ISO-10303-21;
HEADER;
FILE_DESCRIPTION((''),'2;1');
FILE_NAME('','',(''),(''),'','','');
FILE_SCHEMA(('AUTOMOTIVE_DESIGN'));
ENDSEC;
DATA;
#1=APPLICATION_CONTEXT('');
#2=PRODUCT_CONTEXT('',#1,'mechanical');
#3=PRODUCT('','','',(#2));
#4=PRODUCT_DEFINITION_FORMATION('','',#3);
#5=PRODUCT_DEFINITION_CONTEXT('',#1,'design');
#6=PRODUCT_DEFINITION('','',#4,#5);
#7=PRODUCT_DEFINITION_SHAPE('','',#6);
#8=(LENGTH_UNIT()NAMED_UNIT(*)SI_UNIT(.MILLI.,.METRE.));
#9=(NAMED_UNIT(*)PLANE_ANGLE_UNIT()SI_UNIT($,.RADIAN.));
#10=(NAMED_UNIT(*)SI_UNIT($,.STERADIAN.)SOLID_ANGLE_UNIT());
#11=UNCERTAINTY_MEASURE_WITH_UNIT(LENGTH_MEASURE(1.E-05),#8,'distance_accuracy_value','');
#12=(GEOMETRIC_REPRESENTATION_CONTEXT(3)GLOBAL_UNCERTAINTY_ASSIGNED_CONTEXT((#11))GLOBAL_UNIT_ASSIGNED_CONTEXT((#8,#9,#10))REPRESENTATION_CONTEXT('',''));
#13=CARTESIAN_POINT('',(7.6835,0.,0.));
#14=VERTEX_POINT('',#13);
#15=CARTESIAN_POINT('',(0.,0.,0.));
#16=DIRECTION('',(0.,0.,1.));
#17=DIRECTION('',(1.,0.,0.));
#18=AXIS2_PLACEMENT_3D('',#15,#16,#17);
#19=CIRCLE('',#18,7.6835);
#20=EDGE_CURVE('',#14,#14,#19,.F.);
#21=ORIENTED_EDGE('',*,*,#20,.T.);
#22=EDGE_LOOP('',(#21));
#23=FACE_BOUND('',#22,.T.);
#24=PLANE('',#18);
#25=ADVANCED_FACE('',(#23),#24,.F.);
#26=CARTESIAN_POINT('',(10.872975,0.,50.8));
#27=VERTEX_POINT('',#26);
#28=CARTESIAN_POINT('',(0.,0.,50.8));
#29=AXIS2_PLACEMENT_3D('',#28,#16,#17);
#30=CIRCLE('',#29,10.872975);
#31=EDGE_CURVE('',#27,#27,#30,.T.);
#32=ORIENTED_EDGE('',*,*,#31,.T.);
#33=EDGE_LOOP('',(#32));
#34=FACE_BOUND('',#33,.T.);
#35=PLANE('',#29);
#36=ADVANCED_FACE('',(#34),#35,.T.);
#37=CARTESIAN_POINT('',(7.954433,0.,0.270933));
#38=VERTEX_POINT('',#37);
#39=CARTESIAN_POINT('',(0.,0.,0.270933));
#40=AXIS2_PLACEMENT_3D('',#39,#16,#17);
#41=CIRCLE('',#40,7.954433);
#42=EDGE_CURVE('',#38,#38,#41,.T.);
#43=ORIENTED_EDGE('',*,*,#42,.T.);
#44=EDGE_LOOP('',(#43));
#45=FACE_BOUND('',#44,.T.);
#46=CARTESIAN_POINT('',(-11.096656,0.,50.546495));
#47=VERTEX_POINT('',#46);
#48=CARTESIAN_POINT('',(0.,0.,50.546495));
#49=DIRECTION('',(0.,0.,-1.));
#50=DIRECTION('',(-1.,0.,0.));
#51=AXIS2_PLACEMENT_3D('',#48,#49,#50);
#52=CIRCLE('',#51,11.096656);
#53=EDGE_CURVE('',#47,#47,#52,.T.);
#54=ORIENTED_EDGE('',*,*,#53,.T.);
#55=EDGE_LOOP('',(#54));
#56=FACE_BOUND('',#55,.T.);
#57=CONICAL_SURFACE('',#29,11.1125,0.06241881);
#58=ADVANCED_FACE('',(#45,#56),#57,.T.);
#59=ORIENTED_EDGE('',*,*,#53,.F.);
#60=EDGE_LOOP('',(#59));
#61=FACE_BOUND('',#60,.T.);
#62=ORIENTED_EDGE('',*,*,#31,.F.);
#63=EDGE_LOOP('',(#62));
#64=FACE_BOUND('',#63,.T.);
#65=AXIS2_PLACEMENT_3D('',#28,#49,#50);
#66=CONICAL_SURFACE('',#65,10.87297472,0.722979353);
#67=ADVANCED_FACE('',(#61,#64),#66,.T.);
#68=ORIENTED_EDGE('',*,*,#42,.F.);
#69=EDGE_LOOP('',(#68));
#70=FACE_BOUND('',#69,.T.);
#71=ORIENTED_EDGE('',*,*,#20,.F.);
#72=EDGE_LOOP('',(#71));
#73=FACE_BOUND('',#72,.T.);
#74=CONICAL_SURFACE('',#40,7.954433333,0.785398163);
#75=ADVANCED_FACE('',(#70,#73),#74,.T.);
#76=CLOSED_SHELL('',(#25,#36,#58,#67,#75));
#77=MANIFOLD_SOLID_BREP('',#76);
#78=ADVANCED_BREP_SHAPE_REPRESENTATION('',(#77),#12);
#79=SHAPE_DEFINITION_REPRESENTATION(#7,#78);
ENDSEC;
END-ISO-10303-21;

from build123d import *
from OCP.BRepFilletAPI import BRepFilletAPI_MakeChamfer

# Parameters (mm, degrees)
CHAMFER1_SIZE    = 0.254
CHAMFER1_SIZE2   = 0.271461984
CHAMFER1_SIZE2_2 = 0.23952528


# Read off the part's stored shape, not the designer's step: Sweep1
with BuildPart() as part:
    # Sweep1 outline → Sweep1 (revolve)
    with BuildSketch(Plane.XZ):
        Polygon((0, 50.8), (0, 0), (7.9375, 0), (11.1125, 50.8), align=None)
    revolve(axis=Axis((0, 0, 0), (0, 0, 1)))

    # Chamfer1: one chamfer whose edges measure the first distance from different faces: ONE call of the kernel's chamfer builder (chamfer() names one face for all edges)
    chamfer1_edges_1 = [part.edges().sort_by_distance(p)[0] for p in [
        (-7.9375, 0, 0),
    ]]
    chamfer1_side_1 = [part.faces().sort_by_distance(p)[0] for p in [
        (0, 0, 0),
    ]]
    chamfer1_edges_2 = [part.edges().sort_by_distance(p)[0] for p in [
        (-11.1125, 0, 50.8),
    ]]
    chamfer1_side_2 = [part.faces().sort_by_distance(p)[0] for p in [
        (-9.525, 0, 25.4),
    ]]
    chamfer1 = BRepFilletAPI_MakeChamfer(part.part.solid().wrapped)
    for e in chamfer1_edges_1:
        chamfer1.Add(CHAMFER1_SIZE, CHAMFER1_SIZE2, e.wrapped, chamfer1_side_1[0].wrapped)  # the first distance lies on this face
    for e in chamfer1_edges_2:
        chamfer1.Add(CHAMFER1_SIZE, CHAMFER1_SIZE2_2, e.wrapped, chamfer1_side_2[0].wrapped)  # the first distance lies on this face
    add(Compound.cast(chamfer1.Shape()), mode=Mode.REPLACE)


solid = part.part
